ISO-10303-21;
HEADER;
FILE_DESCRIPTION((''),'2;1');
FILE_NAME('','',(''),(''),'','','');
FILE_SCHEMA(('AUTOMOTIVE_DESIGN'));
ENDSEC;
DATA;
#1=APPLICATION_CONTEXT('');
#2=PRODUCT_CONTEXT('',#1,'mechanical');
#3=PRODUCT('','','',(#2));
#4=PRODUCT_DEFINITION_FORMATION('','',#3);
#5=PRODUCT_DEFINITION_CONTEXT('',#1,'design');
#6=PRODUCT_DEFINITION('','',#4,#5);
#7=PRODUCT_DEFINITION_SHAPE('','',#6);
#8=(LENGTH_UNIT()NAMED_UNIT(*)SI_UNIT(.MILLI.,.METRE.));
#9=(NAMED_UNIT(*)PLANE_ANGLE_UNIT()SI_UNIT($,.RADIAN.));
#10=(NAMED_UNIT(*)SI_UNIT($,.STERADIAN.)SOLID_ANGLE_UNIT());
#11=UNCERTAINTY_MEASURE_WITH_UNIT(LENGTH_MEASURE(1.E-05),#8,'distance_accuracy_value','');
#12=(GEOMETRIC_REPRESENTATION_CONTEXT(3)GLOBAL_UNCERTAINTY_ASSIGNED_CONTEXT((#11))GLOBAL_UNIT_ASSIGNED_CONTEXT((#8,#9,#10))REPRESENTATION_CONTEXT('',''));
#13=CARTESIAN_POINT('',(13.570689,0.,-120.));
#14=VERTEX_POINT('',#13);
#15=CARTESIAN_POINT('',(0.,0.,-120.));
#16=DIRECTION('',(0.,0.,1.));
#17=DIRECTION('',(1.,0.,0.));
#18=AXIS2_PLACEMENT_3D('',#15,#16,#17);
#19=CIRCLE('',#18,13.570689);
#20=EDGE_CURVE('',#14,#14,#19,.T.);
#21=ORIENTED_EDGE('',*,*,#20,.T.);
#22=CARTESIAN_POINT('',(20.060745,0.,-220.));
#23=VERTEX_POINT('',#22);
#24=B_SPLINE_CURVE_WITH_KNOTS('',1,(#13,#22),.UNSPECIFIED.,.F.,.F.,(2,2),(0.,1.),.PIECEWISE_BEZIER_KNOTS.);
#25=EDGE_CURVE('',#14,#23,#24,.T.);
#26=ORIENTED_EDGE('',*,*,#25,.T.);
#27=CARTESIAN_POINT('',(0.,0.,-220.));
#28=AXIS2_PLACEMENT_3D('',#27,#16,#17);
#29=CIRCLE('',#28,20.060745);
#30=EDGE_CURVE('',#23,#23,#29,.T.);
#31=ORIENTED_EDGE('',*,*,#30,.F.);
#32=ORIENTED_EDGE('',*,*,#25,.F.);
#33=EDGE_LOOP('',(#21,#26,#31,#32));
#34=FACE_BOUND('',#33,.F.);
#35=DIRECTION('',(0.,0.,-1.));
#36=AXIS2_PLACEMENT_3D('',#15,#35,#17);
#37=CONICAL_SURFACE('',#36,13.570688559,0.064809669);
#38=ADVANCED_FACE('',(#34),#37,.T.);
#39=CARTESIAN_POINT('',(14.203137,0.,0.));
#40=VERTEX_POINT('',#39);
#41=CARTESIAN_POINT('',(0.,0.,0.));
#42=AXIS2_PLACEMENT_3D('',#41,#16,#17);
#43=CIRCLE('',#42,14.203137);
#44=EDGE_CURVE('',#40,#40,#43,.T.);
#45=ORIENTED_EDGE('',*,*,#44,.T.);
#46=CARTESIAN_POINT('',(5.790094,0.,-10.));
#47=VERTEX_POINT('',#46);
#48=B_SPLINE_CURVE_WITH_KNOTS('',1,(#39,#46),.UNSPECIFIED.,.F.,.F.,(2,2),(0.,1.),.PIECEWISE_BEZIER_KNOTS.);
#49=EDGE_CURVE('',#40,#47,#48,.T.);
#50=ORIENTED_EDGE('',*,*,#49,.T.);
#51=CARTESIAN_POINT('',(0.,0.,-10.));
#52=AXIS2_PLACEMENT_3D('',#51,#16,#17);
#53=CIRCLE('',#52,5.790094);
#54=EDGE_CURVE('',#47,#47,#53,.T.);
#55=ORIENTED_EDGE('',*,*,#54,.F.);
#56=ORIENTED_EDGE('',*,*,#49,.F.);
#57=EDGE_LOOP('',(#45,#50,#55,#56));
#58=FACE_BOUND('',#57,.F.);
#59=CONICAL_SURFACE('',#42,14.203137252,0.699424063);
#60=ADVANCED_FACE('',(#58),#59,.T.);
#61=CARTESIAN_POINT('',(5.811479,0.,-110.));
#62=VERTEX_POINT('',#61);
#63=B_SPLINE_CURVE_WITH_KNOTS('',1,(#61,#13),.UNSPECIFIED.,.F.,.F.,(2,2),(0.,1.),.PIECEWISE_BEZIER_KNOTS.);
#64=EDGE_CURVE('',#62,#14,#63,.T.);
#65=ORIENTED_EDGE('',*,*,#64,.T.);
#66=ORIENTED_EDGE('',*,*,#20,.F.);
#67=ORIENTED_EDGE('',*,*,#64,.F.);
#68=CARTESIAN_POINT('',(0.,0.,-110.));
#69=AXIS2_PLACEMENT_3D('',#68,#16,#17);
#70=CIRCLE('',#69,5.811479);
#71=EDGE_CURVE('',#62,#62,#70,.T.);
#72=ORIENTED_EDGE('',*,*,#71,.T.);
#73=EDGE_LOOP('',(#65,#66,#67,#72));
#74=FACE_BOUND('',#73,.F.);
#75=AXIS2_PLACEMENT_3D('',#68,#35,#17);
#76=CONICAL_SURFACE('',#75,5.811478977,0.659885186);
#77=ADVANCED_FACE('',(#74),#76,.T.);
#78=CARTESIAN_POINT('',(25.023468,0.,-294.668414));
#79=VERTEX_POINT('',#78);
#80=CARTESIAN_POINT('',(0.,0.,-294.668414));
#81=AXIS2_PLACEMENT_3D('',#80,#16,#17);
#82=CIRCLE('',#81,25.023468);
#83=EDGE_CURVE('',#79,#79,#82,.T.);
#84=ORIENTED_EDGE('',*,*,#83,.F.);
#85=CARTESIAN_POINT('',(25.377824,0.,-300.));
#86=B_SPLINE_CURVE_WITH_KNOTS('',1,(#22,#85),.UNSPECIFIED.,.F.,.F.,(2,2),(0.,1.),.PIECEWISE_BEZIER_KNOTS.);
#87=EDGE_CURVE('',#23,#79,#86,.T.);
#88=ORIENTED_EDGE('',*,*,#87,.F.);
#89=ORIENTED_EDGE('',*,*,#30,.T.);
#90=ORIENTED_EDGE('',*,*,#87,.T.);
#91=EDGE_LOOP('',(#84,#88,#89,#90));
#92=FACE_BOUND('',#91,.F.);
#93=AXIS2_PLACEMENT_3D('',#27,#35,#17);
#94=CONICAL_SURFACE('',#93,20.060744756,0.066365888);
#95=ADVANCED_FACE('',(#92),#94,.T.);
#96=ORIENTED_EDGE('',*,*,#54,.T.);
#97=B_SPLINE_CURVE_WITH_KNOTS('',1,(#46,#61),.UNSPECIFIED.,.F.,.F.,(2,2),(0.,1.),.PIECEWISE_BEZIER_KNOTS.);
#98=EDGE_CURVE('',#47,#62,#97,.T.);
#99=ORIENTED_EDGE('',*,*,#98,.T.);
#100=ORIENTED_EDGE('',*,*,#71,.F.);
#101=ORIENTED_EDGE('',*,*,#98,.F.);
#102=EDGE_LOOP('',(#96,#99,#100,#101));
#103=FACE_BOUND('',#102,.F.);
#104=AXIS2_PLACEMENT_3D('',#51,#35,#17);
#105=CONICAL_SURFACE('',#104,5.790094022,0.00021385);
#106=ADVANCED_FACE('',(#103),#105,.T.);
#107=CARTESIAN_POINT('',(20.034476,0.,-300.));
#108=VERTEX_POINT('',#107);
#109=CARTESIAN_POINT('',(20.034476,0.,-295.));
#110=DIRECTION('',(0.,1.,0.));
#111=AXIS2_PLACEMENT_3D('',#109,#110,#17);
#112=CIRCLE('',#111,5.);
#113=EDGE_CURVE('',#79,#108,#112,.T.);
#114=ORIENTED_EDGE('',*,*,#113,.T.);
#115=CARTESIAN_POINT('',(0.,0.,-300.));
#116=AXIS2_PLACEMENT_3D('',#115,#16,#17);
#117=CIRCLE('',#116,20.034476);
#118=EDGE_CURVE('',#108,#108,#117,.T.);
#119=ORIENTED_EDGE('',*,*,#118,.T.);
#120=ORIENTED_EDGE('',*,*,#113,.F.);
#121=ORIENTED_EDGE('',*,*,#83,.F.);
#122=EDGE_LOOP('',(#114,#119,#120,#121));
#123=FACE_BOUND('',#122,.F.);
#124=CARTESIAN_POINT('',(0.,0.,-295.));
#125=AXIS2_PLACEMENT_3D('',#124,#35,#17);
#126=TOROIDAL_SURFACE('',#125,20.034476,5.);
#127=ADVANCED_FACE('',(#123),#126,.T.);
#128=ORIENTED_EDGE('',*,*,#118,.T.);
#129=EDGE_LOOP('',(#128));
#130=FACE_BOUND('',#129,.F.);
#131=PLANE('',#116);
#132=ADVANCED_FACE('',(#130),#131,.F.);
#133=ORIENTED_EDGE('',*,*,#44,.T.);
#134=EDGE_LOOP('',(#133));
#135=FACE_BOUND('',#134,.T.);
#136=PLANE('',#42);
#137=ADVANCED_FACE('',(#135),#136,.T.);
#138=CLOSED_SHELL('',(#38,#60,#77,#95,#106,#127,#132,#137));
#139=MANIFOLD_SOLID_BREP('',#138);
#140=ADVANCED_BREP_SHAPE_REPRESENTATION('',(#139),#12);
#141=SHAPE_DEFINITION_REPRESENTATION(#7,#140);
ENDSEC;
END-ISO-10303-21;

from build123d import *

# Parameters (mm, degrees)
F0_R  = 14.2031372516
F5_R  = 5.7900940223
F6_R  = 5.811478977
F7_R  = 13.5706885585
F8_R  = 20.0607447558
F14_R = 25.3778243108
F16_R = 5


with BuildPart() as f9:
    # F0 (on Top) → F9 section 0
    with BuildSketch(Plane.XY):
        Circle(F0_R)
    # F5 (on offset) → F9 section 1
    with BuildSketch(Plane.XY.offset(-10)):
        Circle(F5_R)
    loft()

    # F5 (on offset) → F10 section 0
    with BuildSketch(Plane.XY.offset(-10)):
        Circle(F5_R)
    # F6 (on offset) → F10 section 1
    with BuildSketch(Plane.XY.offset(-110)):
        Circle(F6_R)
    loft()

    # F6 (on offset) → F11 section 0
    with BuildSketch(Plane.XY.offset(-110)):
        Circle(F6_R)
    # F7 (on offset) → F11 section 1
    with BuildSketch(Plane.XY.offset(-120)):
        Circle(F7_R)
    loft()

    # F7 (on offset) → F12 section 0
    with BuildSketch(Plane.XY.offset(-120)):
        Circle(F7_R)
    # F8 (on offset) → F12 section 1
    with BuildSketch(Plane.XY.offset(-220)):
        Circle(F8_R)
    loft()

    # F8 (on offset) → F15 section 0
    with BuildSketch(Plane.XY.offset(-220)):
        Circle(F8_R)
    # F14 (on offset) → F15 section 1
    with BuildSketch(Plane.XY.offset(-300)):
        Circle(F14_R)
    loft()

    # F16
    f16_edges = [f9.edges().sort_by_distance(p)[0] for p in [
        (-25.377824, 0, -300),
    ]]
    fillet(f16_edges, radius=F16_R)


solid = f9.part
